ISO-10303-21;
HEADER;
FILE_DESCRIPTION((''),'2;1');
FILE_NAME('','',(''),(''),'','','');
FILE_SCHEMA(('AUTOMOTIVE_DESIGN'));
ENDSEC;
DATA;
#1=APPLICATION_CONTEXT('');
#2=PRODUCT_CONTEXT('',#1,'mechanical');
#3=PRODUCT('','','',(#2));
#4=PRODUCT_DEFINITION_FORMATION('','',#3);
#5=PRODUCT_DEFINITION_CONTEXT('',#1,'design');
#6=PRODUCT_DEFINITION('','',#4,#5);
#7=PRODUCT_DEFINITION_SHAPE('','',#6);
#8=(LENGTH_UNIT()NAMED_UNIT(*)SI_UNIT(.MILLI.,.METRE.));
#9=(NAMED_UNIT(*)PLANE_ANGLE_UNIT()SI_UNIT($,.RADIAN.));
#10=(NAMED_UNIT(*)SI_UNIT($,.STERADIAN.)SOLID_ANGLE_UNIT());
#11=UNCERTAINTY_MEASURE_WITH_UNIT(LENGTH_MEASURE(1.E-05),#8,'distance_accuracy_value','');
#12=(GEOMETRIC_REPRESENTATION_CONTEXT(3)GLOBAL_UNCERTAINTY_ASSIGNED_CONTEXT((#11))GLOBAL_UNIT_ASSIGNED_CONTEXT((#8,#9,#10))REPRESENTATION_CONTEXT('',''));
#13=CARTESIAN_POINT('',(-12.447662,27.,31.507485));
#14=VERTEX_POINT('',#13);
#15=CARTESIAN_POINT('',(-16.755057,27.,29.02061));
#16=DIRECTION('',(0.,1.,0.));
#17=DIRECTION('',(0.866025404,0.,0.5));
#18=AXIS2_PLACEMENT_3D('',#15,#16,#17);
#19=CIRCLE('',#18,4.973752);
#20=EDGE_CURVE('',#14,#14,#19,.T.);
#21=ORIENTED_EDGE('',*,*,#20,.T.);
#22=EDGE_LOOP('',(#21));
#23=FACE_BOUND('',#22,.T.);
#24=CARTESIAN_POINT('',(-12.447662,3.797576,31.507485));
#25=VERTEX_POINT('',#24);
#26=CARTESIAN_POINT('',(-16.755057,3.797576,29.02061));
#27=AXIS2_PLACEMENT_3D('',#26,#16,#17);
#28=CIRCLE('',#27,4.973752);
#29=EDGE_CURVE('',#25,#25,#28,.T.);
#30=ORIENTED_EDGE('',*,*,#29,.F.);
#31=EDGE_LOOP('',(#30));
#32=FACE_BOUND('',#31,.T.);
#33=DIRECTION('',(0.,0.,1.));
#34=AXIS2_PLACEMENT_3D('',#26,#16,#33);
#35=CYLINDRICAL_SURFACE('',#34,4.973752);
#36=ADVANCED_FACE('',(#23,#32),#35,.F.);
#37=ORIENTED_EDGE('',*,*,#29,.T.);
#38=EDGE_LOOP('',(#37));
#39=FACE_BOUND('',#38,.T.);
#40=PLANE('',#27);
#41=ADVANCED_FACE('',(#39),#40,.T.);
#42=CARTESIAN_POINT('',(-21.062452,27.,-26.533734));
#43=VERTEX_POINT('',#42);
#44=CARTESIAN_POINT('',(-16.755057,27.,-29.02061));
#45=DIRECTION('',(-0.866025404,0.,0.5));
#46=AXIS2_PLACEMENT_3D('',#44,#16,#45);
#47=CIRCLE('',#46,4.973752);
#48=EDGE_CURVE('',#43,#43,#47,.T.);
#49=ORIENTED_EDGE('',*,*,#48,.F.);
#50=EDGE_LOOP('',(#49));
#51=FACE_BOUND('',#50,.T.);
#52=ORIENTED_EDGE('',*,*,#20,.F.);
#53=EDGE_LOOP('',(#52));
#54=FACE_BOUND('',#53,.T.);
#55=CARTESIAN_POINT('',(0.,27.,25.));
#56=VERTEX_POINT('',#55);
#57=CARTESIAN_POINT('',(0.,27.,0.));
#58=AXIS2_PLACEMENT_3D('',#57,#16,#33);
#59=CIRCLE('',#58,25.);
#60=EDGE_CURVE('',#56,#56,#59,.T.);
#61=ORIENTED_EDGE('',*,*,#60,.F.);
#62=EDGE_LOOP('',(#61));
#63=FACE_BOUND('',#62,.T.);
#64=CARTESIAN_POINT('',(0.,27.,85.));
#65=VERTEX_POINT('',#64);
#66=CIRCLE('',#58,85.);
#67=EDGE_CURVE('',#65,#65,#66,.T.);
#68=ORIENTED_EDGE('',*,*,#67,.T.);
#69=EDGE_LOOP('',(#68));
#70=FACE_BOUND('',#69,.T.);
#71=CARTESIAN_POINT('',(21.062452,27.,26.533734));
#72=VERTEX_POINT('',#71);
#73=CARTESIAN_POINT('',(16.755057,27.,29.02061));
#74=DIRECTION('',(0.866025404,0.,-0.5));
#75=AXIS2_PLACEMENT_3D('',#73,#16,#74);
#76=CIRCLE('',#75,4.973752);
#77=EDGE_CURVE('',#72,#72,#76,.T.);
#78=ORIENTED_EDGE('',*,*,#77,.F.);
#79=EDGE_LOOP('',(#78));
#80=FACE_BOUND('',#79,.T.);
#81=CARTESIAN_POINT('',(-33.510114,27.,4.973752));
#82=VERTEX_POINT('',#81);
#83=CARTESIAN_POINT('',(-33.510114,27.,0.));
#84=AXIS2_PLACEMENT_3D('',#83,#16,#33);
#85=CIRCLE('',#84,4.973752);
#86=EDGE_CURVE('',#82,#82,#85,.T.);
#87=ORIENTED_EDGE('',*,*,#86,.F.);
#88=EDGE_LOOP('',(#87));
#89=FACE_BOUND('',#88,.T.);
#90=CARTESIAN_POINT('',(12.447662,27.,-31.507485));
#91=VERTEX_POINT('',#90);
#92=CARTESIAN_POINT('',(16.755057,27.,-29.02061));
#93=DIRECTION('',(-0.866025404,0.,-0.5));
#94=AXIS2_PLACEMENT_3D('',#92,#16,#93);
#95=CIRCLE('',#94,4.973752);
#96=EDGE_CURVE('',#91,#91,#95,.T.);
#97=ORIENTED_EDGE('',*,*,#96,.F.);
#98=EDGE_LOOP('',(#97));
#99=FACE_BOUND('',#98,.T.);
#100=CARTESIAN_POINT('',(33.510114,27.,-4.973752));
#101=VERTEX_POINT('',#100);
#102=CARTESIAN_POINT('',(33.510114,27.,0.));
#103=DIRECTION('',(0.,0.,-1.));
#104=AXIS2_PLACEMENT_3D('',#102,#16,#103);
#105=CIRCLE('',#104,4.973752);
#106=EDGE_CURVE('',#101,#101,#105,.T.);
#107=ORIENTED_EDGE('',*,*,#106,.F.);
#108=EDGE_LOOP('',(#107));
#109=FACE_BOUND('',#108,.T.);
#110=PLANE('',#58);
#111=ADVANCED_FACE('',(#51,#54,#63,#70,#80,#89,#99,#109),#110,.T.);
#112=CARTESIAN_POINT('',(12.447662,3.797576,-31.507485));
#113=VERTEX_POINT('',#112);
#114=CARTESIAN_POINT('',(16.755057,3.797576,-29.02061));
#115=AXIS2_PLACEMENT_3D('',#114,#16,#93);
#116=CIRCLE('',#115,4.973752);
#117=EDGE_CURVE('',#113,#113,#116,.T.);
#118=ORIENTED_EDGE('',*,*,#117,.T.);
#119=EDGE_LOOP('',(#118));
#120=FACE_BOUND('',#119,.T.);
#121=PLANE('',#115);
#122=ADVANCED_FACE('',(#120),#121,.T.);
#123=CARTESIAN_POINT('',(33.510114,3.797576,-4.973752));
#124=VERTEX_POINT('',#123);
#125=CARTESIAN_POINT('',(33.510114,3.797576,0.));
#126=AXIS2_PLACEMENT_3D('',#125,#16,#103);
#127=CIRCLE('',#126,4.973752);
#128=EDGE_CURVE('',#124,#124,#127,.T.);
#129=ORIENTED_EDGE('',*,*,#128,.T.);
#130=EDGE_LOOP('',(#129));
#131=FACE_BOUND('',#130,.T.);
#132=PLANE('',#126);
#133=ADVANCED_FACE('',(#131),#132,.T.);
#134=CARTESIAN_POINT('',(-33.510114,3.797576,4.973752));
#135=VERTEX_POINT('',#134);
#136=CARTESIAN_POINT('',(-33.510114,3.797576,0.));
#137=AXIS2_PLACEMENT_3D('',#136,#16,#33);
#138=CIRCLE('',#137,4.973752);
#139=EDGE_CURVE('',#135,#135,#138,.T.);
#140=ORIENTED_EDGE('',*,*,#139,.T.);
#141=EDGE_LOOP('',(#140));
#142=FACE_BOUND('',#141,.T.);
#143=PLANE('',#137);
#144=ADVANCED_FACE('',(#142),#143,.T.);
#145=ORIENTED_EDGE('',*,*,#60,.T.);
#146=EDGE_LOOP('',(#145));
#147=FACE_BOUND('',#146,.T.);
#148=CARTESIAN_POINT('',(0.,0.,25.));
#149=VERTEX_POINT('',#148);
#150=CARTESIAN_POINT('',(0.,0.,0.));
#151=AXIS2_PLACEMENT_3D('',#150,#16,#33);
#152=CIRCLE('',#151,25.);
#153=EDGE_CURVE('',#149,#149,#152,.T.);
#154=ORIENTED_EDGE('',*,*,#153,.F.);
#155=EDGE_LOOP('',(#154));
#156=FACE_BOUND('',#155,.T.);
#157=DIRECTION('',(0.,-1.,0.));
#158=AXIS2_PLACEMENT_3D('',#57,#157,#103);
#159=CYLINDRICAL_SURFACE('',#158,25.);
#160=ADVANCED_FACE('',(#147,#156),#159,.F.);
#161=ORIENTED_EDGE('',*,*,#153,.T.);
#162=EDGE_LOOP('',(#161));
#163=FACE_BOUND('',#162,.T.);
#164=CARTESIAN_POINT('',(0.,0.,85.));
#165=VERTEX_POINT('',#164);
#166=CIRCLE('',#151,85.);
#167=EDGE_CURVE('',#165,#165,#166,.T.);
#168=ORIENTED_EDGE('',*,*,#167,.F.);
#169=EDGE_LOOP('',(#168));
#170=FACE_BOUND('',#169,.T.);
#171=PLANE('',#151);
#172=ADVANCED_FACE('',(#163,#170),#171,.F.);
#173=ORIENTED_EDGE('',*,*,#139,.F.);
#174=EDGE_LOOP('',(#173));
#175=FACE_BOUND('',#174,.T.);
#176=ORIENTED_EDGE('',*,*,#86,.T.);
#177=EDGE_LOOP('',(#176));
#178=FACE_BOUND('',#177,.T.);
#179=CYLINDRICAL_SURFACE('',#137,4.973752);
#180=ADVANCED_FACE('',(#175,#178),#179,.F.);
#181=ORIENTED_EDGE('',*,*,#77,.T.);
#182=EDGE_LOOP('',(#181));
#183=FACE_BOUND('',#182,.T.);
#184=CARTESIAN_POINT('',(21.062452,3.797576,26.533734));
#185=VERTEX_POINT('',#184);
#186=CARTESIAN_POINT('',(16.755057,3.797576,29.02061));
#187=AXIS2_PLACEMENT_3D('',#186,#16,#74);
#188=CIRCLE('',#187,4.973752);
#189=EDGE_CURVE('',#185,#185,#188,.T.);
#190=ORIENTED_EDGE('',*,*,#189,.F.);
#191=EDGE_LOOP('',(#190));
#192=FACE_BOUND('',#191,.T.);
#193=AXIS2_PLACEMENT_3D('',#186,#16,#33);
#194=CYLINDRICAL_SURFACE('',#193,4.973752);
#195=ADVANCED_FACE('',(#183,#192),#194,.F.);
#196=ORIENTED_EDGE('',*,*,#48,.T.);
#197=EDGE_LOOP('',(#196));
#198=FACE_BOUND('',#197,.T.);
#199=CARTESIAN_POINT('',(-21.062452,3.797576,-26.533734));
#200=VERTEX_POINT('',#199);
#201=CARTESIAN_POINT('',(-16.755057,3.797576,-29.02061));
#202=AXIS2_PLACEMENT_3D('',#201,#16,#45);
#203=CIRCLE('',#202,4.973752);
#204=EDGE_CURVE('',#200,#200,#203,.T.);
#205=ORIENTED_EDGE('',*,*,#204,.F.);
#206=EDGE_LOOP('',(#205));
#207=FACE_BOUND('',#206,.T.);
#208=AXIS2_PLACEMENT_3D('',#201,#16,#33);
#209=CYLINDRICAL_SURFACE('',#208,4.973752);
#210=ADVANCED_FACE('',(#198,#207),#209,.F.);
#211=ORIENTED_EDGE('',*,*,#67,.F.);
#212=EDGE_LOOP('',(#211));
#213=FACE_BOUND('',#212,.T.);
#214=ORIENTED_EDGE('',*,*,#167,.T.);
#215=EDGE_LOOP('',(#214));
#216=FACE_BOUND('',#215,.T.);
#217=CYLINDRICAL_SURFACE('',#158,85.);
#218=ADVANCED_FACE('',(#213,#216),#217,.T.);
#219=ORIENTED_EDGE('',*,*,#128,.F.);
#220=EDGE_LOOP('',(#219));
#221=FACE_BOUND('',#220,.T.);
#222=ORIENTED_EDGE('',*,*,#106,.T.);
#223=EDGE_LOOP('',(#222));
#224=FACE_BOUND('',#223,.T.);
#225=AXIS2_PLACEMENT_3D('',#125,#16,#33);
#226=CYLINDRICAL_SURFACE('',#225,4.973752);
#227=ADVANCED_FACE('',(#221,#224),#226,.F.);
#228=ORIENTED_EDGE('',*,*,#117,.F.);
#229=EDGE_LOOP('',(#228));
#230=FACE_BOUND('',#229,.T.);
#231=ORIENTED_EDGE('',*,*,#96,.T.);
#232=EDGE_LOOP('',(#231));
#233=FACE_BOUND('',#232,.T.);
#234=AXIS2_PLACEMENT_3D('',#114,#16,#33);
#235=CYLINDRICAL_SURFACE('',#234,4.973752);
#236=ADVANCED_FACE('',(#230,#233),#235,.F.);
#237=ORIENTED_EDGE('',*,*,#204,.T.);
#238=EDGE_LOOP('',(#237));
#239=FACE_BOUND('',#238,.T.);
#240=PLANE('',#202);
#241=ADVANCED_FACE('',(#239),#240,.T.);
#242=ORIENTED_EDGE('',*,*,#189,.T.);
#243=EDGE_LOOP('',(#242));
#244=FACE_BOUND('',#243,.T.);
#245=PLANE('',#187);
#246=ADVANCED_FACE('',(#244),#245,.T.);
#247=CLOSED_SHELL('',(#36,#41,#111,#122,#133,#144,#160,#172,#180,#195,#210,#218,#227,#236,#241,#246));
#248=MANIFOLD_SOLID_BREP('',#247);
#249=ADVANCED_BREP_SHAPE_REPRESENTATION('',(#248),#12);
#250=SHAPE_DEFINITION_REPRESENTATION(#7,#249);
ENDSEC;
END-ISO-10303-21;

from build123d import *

# Parameters (mm, degrees)
SKETCH1_R           = 85
BOSS_EXTRUDE1_DEPTH = 27
SKETCH2_R           = 25
CUT_EXTRUDE1_DEPTH  = 124.203084377
SKETCH3_R           = 4.973751526
CUT_EXTRUDE2_DEPTH  = 23.202423821
CIRPATTERN1_COUNT   = 6


with BuildPart() as part:
    # Sketch1 → Boss-Extrude1 (new body)
    with BuildSketch(Plane(origin=(0, 0, 0), x_dir=(1, 0, 0), z_dir=(0, 1, 0))):
        Circle(SKETCH1_R)
    extrude(amount=BOSS_EXTRUDE1_DEPTH)

    # Sketch2 → Cut-Extrude1 (cut, through all)
    with BuildSketch(Plane(origin=(0, 0, 0), x_dir=(1, 0, 0), z_dir=(0, 1, 0))):
        Circle(SKETCH2_R)
    extrude(amount=CUT_EXTRUDE1_DEPTH, mode=Mode.SUBTRACT)

    # Sketch3 → Cut-Extrude2 (cut)
    with BuildSketch(Plane(origin=(0, 27, 0), x_dir=(1, 0, 0), z_dir=(0, 1, 0))):
        with Locations((-33.510113522, 0)):
            Circle(SKETCH3_R)
    cut_extrude2 = extrude(amount=-CUT_EXTRUDE2_DEPTH, mode=Mode.SUBTRACT)

    # CirPattern1: Cut-Extrude2 ×6 about axis
    cirpattern1_axis = Axis((0, 0, 0), (0, 1, 0))
    for i in range(1, CIRPATTERN1_COUNT):
        add(cut_extrude2.rotate(cirpattern1_axis, i * 360 / CIRPATTERN1_COUNT), mode=Mode.SUBTRACT)


solid = part.part
